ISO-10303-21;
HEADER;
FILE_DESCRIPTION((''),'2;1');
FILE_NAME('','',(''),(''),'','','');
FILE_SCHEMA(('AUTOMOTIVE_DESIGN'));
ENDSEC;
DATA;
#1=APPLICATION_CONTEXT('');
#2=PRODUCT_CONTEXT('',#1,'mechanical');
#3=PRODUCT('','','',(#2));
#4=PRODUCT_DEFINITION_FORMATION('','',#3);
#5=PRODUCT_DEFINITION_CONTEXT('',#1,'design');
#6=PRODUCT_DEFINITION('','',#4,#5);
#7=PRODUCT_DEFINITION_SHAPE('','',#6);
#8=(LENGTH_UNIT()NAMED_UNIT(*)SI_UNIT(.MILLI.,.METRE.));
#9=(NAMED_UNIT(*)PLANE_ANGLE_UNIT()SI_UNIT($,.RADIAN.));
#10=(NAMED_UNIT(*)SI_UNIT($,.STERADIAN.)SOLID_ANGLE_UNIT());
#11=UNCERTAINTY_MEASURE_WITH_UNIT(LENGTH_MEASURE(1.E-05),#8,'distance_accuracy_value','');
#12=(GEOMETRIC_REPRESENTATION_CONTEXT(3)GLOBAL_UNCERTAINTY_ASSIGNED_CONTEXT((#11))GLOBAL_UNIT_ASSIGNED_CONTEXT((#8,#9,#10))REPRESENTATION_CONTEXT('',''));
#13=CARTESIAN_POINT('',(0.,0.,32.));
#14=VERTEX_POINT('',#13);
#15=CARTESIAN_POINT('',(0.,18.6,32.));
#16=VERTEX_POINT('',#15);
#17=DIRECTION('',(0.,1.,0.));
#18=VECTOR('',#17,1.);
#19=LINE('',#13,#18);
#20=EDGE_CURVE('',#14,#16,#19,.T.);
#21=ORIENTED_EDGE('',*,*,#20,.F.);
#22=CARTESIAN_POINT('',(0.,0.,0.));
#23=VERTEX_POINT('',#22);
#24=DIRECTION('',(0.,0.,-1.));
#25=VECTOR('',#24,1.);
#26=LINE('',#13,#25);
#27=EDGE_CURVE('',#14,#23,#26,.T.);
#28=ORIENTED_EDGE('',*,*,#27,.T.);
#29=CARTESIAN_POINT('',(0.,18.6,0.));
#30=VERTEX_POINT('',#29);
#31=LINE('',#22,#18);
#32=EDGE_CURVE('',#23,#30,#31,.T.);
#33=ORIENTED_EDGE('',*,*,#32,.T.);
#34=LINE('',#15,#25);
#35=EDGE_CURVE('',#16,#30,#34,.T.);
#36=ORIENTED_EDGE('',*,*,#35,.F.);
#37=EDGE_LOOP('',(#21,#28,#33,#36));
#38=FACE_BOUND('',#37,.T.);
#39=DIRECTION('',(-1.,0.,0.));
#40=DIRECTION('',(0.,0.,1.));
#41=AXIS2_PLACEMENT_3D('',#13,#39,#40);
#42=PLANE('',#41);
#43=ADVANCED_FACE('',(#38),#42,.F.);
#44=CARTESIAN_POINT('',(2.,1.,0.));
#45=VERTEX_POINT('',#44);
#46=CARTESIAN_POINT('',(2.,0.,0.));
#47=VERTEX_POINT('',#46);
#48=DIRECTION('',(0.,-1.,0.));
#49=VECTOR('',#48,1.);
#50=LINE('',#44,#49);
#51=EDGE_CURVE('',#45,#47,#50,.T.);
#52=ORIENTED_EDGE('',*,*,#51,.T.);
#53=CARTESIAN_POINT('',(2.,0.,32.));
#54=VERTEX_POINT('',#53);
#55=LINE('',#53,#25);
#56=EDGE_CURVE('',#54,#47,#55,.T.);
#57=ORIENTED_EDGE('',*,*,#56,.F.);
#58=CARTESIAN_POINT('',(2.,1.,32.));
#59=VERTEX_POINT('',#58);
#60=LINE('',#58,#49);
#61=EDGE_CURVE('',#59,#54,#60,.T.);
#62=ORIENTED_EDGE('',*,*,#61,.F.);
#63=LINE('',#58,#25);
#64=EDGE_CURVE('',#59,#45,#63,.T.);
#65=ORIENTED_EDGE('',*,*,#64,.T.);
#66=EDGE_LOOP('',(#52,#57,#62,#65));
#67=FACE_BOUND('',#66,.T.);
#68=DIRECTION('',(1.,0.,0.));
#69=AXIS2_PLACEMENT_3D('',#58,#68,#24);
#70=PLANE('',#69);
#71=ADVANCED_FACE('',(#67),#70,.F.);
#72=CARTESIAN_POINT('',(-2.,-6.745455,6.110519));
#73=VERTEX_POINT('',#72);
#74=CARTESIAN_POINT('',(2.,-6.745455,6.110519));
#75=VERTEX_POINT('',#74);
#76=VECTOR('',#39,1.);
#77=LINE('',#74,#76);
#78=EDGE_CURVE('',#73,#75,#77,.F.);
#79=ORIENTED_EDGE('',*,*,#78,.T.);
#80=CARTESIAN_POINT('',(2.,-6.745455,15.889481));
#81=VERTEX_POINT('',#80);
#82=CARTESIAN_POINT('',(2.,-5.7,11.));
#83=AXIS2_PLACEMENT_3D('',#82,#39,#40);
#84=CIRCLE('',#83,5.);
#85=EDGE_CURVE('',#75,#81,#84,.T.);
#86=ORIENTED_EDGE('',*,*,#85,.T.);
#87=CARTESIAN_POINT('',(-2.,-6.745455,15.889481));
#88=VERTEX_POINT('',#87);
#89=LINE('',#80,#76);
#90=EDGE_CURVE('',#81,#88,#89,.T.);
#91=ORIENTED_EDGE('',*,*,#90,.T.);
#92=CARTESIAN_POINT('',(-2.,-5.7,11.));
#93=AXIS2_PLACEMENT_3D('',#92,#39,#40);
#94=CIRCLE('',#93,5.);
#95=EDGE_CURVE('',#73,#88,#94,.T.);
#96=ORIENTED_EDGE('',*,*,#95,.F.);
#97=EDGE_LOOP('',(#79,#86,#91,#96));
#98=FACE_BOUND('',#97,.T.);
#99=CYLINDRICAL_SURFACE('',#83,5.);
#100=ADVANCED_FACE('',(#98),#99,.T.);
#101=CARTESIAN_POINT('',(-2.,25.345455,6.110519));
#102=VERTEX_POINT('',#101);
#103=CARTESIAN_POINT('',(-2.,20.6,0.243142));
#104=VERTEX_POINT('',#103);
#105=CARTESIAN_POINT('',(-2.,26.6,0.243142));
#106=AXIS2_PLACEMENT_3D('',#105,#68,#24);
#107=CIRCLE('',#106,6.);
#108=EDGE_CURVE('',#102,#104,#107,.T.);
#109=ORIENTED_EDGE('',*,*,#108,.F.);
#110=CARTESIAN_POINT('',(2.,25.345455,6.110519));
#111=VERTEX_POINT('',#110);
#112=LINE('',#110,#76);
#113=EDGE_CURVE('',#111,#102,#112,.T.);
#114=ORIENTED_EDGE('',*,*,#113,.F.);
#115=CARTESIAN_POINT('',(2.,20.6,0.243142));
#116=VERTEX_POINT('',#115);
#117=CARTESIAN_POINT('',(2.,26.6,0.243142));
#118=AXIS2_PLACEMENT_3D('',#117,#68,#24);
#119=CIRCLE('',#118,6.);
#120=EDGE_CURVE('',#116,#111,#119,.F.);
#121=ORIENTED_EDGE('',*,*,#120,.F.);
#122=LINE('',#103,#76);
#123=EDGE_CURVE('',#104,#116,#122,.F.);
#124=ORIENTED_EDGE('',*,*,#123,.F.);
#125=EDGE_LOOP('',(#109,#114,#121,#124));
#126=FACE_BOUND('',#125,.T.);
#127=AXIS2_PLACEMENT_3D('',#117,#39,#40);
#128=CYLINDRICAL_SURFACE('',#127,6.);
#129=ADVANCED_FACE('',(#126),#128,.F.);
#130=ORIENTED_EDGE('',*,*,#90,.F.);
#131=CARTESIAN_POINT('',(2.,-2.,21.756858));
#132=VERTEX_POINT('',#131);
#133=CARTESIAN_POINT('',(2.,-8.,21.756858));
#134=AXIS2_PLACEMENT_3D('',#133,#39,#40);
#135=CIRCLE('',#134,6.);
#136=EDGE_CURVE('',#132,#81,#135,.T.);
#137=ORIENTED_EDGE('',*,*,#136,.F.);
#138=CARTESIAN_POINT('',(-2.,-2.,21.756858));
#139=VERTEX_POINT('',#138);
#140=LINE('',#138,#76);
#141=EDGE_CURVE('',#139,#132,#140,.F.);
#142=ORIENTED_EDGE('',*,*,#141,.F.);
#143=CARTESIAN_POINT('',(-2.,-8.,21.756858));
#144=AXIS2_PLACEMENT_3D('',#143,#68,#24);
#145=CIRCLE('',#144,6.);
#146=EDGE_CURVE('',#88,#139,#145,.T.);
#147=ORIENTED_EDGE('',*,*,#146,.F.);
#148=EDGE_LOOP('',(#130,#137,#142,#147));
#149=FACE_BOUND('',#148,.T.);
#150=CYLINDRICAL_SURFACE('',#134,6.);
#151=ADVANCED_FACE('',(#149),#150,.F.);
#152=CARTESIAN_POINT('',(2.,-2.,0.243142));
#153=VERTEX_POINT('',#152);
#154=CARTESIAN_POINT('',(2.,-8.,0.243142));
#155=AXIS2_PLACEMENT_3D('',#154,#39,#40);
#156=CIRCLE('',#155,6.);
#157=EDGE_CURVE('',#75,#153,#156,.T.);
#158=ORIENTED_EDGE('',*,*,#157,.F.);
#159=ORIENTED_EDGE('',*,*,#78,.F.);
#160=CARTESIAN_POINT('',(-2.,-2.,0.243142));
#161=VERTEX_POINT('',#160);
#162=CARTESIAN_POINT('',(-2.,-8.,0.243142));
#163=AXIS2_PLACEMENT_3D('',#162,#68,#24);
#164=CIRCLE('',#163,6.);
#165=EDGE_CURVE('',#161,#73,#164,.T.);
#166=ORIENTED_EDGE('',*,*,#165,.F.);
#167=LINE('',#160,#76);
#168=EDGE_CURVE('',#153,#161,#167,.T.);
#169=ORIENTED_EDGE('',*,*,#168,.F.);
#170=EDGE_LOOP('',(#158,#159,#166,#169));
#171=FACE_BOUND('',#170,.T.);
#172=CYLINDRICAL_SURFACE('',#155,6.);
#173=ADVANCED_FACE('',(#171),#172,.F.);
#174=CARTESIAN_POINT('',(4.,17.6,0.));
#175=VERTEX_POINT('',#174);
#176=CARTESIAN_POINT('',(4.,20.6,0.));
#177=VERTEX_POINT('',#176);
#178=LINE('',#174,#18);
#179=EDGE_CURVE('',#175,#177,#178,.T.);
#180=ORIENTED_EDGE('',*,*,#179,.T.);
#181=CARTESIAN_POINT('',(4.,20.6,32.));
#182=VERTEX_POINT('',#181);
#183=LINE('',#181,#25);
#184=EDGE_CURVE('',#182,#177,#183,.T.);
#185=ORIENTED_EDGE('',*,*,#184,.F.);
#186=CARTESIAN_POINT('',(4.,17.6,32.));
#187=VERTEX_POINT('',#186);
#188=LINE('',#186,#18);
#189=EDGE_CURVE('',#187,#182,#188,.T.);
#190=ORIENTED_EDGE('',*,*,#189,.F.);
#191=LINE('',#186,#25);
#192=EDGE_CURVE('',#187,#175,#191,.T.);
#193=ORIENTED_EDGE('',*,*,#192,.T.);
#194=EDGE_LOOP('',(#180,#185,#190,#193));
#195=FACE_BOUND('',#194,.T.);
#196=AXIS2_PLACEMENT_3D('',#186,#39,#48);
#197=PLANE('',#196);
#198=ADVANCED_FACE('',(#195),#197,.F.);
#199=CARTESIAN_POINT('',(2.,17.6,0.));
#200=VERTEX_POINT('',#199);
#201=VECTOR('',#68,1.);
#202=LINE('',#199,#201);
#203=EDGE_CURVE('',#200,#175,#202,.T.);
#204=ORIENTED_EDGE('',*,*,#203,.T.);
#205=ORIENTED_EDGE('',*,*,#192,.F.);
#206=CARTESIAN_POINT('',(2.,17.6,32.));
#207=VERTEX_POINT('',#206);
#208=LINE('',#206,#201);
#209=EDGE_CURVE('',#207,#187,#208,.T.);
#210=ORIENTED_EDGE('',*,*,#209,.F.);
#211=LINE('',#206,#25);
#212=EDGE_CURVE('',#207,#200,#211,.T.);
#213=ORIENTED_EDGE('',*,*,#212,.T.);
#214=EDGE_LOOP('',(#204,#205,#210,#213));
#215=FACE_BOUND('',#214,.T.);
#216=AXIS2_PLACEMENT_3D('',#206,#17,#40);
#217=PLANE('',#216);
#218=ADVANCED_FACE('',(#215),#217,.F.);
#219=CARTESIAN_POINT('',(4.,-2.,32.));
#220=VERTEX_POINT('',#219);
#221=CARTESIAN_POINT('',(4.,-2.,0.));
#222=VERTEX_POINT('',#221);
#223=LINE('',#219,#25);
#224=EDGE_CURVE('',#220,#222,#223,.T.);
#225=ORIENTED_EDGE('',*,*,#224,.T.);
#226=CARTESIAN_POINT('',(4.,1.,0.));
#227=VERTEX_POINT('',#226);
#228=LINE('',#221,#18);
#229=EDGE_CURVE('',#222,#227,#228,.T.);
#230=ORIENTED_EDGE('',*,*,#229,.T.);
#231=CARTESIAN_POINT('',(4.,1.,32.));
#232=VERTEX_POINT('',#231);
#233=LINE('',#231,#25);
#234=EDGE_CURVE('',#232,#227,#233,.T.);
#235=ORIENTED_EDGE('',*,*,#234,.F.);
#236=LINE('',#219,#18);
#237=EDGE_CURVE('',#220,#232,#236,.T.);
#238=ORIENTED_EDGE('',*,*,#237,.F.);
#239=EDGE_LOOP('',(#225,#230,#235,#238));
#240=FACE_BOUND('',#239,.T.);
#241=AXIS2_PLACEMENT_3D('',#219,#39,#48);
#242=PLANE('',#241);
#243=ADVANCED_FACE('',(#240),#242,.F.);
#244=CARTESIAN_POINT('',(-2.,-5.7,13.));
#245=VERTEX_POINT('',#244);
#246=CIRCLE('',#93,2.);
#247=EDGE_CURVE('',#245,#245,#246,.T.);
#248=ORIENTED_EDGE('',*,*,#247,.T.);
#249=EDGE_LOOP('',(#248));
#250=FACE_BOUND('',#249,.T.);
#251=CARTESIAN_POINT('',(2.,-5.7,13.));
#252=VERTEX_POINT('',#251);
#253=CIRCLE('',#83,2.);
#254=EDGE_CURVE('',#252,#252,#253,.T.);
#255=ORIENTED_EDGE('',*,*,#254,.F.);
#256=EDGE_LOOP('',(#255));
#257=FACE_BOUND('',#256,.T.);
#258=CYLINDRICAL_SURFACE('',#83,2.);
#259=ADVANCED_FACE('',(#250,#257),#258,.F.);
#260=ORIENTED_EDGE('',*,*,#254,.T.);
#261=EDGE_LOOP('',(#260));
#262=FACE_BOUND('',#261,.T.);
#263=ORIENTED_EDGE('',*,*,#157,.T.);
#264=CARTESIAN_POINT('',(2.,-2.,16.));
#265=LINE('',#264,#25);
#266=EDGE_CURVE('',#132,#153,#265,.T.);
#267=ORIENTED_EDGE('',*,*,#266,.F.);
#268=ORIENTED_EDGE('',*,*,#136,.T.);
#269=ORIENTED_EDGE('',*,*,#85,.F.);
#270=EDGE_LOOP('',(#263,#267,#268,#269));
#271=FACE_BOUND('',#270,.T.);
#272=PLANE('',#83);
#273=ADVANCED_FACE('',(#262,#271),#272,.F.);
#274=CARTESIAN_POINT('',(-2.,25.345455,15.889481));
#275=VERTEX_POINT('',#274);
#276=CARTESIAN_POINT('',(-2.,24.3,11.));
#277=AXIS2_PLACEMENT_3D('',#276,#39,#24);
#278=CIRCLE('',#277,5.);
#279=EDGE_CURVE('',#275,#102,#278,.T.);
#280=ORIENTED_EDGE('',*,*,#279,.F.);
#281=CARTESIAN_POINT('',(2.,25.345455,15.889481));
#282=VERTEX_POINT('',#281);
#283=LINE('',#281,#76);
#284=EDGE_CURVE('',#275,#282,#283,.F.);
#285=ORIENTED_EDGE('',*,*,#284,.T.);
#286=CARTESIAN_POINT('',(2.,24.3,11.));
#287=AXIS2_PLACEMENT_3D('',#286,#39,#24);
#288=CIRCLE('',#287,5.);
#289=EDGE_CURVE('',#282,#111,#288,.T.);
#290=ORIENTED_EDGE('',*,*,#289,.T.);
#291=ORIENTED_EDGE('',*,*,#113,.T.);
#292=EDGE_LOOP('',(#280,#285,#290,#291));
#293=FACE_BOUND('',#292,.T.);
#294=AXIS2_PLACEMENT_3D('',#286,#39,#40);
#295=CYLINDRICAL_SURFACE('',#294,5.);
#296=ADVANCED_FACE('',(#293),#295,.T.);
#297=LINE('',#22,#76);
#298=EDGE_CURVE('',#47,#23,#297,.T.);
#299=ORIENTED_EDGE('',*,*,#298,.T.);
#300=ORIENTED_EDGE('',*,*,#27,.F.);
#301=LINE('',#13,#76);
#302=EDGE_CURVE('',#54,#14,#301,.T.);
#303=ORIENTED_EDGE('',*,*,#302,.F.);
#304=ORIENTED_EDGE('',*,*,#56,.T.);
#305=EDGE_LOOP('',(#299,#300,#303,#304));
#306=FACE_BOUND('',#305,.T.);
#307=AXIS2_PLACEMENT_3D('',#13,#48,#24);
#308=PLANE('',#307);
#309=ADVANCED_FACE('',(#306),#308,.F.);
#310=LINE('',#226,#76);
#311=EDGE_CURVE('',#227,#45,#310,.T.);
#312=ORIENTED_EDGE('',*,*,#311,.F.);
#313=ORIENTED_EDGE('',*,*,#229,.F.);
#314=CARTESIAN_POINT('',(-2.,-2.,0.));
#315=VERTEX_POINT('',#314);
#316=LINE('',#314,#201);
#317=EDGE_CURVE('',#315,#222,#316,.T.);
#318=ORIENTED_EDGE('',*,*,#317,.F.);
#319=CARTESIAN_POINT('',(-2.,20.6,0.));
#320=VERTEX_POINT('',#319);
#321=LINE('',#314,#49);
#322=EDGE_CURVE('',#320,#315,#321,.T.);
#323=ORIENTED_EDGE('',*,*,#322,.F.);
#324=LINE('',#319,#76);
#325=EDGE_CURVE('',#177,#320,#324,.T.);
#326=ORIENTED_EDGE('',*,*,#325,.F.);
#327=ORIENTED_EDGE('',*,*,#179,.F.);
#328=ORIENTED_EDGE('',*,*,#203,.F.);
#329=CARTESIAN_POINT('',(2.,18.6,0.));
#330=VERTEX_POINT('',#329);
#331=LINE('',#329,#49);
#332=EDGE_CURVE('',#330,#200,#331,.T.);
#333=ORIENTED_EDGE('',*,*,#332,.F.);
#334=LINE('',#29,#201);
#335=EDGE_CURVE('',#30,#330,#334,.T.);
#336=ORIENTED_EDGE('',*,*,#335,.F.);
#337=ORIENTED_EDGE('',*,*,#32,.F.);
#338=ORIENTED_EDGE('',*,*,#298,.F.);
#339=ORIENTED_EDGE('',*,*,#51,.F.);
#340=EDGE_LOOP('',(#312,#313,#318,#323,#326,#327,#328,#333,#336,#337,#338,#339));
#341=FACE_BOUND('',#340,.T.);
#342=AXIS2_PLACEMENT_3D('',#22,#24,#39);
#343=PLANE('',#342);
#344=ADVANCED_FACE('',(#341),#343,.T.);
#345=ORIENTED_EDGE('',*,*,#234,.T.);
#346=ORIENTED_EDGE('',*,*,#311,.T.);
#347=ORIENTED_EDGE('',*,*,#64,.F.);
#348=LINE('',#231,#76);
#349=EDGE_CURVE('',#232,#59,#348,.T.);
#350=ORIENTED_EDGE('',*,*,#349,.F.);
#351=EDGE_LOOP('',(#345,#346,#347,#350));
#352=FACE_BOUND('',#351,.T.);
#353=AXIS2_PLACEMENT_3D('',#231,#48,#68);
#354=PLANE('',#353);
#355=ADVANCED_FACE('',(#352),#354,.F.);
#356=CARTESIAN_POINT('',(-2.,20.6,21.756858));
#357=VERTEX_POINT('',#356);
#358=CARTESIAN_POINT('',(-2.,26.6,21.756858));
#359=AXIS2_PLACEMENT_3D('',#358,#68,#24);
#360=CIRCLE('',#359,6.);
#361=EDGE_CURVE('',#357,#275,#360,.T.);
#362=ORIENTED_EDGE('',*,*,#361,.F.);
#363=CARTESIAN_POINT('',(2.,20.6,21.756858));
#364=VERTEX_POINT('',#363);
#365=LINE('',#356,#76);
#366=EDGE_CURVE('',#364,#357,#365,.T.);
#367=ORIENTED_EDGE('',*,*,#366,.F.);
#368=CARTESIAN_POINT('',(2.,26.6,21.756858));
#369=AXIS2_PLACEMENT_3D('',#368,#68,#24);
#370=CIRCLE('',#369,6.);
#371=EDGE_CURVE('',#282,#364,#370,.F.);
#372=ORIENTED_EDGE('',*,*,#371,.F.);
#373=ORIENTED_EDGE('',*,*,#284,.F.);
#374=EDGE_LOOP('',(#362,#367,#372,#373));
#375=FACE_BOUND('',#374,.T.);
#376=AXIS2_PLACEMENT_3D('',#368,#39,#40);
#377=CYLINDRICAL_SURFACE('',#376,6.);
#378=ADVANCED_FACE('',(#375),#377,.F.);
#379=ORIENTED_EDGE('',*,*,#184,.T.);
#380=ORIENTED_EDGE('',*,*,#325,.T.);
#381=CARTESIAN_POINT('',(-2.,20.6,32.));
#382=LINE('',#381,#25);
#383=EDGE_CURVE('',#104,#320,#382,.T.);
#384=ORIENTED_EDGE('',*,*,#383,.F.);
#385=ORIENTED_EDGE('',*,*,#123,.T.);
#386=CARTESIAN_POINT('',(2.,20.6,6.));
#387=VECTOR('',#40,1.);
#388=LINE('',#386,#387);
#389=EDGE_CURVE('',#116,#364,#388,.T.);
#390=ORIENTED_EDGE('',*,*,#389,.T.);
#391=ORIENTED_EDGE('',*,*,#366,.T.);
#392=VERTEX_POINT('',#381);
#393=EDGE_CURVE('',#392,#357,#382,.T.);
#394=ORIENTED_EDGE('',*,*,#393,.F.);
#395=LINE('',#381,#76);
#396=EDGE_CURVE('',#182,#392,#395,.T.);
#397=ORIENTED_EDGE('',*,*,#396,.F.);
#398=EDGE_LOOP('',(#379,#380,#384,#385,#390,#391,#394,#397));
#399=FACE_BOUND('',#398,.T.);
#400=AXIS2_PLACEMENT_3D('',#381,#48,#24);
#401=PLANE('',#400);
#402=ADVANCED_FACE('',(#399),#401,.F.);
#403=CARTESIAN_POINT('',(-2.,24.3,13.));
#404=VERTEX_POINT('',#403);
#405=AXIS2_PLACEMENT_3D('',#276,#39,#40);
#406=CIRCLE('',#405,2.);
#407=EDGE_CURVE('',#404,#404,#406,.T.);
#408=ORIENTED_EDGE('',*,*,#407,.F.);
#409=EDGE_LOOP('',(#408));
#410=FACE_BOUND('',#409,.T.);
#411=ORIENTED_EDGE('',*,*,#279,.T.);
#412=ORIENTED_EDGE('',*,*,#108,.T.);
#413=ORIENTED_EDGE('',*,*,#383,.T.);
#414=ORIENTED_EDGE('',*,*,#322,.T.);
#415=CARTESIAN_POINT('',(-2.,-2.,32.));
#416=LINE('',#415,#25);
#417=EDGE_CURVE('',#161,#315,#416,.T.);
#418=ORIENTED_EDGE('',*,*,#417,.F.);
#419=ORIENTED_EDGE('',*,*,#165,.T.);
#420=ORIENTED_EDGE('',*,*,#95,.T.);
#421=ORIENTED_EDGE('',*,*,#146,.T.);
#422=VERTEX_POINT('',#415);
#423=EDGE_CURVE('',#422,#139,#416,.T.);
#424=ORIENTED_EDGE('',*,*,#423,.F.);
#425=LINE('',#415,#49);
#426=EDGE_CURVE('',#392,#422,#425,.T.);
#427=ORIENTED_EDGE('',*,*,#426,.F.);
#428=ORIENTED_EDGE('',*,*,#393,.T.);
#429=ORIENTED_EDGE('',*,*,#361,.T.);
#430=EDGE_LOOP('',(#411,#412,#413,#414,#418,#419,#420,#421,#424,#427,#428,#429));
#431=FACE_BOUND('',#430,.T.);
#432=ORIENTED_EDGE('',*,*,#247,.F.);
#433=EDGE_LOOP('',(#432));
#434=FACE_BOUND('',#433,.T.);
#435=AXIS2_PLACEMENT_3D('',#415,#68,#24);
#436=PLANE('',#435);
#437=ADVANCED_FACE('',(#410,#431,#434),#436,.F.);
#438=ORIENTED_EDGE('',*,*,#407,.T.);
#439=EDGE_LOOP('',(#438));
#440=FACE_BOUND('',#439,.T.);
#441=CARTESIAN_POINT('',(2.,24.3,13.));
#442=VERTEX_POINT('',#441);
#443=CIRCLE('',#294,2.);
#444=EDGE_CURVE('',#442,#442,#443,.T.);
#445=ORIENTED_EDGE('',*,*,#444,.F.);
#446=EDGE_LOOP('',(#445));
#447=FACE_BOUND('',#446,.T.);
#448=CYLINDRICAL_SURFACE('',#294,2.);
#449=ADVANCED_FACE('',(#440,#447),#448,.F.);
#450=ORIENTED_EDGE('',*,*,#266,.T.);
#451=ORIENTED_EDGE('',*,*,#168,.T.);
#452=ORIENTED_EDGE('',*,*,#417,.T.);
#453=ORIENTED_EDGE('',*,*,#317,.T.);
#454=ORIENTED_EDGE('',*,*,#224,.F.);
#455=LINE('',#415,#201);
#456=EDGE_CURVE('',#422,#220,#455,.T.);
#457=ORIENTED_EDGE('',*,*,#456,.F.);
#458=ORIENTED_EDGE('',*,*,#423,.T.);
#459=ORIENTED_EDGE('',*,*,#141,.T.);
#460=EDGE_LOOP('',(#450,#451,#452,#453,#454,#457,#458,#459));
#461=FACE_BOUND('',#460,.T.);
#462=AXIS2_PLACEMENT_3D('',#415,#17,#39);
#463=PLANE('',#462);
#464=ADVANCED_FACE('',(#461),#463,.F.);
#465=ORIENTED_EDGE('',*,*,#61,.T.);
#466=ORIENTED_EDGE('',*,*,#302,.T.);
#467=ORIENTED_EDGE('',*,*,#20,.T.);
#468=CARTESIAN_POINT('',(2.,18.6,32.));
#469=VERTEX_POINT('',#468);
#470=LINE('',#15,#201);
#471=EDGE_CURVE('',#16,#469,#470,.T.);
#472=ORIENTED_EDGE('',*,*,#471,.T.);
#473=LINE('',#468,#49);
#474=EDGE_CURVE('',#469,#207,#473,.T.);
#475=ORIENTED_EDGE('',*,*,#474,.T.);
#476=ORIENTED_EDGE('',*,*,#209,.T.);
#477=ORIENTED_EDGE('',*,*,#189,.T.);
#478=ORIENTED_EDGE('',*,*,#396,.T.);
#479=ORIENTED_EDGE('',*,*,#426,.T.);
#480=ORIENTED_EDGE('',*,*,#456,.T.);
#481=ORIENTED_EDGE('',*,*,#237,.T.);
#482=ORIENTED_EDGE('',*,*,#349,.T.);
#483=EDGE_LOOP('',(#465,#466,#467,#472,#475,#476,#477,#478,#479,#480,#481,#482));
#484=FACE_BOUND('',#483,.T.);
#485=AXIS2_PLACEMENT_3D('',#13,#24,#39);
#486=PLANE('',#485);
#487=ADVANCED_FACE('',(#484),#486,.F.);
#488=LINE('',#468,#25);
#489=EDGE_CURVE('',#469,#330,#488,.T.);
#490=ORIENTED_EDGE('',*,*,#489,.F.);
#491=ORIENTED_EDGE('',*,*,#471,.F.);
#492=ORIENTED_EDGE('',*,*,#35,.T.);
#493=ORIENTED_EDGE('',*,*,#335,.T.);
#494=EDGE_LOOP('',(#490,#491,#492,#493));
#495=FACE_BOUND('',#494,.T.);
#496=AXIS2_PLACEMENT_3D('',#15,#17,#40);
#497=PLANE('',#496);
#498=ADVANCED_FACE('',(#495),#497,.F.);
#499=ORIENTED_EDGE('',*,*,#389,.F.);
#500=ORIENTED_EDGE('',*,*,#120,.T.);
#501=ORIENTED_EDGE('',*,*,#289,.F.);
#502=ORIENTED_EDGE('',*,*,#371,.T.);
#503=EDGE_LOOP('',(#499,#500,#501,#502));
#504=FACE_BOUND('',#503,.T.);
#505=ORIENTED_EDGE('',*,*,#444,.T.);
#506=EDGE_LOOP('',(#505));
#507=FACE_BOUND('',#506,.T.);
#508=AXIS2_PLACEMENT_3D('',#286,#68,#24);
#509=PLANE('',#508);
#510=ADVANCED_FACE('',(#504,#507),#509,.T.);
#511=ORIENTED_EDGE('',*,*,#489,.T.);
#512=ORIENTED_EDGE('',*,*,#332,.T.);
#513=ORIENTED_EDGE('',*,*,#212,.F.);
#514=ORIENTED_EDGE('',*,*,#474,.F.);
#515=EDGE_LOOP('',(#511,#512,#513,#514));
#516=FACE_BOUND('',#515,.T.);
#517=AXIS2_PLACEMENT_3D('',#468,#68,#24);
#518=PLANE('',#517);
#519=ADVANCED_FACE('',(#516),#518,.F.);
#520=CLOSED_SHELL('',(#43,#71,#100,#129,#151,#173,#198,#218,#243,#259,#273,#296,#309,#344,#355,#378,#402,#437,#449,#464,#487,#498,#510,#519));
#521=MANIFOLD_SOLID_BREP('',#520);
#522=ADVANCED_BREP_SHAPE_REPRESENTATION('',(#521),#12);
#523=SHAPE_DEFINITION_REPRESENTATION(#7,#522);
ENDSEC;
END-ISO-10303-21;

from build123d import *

# Parameters (mm, degrees)
BOSS_EXTRU_1_DEPTH = 32
ESQUISSE2_R        = 2
BOSS_EXTRU_2_DEPTH = 4
CONG_1_R           = 6


with BuildPart() as part:
    # Esquisse1 → Boss.-Extru.1 (new body)
    with BuildSketch(Plane.XY):
        Polygon((4, -2), (4, 1), (2, 1), (2, 0), (0, 0), (0, 18.6), (2, 18.6), (2, 17.6), (4, 17.6), (4, 20.6), (-2, 20.6), (-2, -2), align=None)
    extrude(amount=BOSS_EXTRU_1_DEPTH)

    # Esquisse2 → Boss.-Extru.2 (add)
    # profile 1 of 2: a face of its own
    with BuildSketch(Plane.ZY.offset(2)):
        with BuildLine():
            Line((6, -2), (6, -5.7))
            ThreePointArc((6, -5.7), (11, -10.7), (16, -5.7))
            Line((16, -5.7), (16, -2))
            Line((16, -2), (6, -2))
        make_face()
        with Locations((11, -5.7)):
            Circle(ESQUISSE2_R, mode=Mode.SUBTRACT)
    # profile 2 of 2: a face of its own
    with BuildSketch(Plane.ZY.offset(2)):
        with BuildLine():
            Line((6, 20.6), (6, 24.3))
            ThreePointArc((6, 24.3), (11, 29.3), (16, 24.3))
            Line((16, 24.3), (16, 20.6))
            Line((16, 20.6), (6, 20.6))
        make_face()
        with Locations((11, 24.3)):
            Circle(ESQUISSE2_R, mode=Mode.SUBTRACT)
    extrude(amount=-BOSS_EXTRU_2_DEPTH)

    # Congé1
    # the kernel refuses this fillet: 6 mm, written as the material it adds along each edge
    with BuildSketch(Plane(origin=(-2, -2, 16), x_dir=(0, 0, 1), z_dir=(1, 0, 0)), Plane(origin=(-2, 20.6, 6), x_dir=(0, 0, -1), z_dir=(1, 0, 0))) as cong_1_piece_1:
        with BuildLine():
            CenterArc((5.756858277, 6), CONG_1_R, 192.069082524, 77.930917476)
            Line((-0.110518965, 4.745454545), (-0.697256689, 4.62))
            ThreePointArc((-0.697256689, 4.62), (-0.6, 3.7), (-0.6, 0))
            Line((-0.6, 0), (0, -0.6))
            Line((0, -0.6), (5.756858277, -0.6))
            Line((5.756858277, -0.6), (5.756858277, 0))
        make_face()
    extrude(amount=4)
    with BuildSketch(Plane(origin=(-2, 20.6, 16), x_dir=(0, 0, 1), z_dir=(1, 0, 0)), Plane(origin=(-2, -2, 6), x_dir=(0, 0, -1), z_dir=(1, 0, 0))) as cong_1_piece_2:
        with BuildLine():
            CenterArc((5.756858277, -6), CONG_1_R, 90, 77.930917476)
            Line((-0.110518965, -4.745454545), (-0.697256689, -4.62))
            ThreePointArc((-0.697256689, -4.62), (-0.6, -3.7), (-0.6, 0))
            Line((-0.6, 0), (0, 0.6))
            Line((0, 0.6), (5.756858277, 0.6))
            Line((5.756858277, 0.6), (5.756858277, 0))
        make_face()
    extrude(amount=4)


solid = part.part
